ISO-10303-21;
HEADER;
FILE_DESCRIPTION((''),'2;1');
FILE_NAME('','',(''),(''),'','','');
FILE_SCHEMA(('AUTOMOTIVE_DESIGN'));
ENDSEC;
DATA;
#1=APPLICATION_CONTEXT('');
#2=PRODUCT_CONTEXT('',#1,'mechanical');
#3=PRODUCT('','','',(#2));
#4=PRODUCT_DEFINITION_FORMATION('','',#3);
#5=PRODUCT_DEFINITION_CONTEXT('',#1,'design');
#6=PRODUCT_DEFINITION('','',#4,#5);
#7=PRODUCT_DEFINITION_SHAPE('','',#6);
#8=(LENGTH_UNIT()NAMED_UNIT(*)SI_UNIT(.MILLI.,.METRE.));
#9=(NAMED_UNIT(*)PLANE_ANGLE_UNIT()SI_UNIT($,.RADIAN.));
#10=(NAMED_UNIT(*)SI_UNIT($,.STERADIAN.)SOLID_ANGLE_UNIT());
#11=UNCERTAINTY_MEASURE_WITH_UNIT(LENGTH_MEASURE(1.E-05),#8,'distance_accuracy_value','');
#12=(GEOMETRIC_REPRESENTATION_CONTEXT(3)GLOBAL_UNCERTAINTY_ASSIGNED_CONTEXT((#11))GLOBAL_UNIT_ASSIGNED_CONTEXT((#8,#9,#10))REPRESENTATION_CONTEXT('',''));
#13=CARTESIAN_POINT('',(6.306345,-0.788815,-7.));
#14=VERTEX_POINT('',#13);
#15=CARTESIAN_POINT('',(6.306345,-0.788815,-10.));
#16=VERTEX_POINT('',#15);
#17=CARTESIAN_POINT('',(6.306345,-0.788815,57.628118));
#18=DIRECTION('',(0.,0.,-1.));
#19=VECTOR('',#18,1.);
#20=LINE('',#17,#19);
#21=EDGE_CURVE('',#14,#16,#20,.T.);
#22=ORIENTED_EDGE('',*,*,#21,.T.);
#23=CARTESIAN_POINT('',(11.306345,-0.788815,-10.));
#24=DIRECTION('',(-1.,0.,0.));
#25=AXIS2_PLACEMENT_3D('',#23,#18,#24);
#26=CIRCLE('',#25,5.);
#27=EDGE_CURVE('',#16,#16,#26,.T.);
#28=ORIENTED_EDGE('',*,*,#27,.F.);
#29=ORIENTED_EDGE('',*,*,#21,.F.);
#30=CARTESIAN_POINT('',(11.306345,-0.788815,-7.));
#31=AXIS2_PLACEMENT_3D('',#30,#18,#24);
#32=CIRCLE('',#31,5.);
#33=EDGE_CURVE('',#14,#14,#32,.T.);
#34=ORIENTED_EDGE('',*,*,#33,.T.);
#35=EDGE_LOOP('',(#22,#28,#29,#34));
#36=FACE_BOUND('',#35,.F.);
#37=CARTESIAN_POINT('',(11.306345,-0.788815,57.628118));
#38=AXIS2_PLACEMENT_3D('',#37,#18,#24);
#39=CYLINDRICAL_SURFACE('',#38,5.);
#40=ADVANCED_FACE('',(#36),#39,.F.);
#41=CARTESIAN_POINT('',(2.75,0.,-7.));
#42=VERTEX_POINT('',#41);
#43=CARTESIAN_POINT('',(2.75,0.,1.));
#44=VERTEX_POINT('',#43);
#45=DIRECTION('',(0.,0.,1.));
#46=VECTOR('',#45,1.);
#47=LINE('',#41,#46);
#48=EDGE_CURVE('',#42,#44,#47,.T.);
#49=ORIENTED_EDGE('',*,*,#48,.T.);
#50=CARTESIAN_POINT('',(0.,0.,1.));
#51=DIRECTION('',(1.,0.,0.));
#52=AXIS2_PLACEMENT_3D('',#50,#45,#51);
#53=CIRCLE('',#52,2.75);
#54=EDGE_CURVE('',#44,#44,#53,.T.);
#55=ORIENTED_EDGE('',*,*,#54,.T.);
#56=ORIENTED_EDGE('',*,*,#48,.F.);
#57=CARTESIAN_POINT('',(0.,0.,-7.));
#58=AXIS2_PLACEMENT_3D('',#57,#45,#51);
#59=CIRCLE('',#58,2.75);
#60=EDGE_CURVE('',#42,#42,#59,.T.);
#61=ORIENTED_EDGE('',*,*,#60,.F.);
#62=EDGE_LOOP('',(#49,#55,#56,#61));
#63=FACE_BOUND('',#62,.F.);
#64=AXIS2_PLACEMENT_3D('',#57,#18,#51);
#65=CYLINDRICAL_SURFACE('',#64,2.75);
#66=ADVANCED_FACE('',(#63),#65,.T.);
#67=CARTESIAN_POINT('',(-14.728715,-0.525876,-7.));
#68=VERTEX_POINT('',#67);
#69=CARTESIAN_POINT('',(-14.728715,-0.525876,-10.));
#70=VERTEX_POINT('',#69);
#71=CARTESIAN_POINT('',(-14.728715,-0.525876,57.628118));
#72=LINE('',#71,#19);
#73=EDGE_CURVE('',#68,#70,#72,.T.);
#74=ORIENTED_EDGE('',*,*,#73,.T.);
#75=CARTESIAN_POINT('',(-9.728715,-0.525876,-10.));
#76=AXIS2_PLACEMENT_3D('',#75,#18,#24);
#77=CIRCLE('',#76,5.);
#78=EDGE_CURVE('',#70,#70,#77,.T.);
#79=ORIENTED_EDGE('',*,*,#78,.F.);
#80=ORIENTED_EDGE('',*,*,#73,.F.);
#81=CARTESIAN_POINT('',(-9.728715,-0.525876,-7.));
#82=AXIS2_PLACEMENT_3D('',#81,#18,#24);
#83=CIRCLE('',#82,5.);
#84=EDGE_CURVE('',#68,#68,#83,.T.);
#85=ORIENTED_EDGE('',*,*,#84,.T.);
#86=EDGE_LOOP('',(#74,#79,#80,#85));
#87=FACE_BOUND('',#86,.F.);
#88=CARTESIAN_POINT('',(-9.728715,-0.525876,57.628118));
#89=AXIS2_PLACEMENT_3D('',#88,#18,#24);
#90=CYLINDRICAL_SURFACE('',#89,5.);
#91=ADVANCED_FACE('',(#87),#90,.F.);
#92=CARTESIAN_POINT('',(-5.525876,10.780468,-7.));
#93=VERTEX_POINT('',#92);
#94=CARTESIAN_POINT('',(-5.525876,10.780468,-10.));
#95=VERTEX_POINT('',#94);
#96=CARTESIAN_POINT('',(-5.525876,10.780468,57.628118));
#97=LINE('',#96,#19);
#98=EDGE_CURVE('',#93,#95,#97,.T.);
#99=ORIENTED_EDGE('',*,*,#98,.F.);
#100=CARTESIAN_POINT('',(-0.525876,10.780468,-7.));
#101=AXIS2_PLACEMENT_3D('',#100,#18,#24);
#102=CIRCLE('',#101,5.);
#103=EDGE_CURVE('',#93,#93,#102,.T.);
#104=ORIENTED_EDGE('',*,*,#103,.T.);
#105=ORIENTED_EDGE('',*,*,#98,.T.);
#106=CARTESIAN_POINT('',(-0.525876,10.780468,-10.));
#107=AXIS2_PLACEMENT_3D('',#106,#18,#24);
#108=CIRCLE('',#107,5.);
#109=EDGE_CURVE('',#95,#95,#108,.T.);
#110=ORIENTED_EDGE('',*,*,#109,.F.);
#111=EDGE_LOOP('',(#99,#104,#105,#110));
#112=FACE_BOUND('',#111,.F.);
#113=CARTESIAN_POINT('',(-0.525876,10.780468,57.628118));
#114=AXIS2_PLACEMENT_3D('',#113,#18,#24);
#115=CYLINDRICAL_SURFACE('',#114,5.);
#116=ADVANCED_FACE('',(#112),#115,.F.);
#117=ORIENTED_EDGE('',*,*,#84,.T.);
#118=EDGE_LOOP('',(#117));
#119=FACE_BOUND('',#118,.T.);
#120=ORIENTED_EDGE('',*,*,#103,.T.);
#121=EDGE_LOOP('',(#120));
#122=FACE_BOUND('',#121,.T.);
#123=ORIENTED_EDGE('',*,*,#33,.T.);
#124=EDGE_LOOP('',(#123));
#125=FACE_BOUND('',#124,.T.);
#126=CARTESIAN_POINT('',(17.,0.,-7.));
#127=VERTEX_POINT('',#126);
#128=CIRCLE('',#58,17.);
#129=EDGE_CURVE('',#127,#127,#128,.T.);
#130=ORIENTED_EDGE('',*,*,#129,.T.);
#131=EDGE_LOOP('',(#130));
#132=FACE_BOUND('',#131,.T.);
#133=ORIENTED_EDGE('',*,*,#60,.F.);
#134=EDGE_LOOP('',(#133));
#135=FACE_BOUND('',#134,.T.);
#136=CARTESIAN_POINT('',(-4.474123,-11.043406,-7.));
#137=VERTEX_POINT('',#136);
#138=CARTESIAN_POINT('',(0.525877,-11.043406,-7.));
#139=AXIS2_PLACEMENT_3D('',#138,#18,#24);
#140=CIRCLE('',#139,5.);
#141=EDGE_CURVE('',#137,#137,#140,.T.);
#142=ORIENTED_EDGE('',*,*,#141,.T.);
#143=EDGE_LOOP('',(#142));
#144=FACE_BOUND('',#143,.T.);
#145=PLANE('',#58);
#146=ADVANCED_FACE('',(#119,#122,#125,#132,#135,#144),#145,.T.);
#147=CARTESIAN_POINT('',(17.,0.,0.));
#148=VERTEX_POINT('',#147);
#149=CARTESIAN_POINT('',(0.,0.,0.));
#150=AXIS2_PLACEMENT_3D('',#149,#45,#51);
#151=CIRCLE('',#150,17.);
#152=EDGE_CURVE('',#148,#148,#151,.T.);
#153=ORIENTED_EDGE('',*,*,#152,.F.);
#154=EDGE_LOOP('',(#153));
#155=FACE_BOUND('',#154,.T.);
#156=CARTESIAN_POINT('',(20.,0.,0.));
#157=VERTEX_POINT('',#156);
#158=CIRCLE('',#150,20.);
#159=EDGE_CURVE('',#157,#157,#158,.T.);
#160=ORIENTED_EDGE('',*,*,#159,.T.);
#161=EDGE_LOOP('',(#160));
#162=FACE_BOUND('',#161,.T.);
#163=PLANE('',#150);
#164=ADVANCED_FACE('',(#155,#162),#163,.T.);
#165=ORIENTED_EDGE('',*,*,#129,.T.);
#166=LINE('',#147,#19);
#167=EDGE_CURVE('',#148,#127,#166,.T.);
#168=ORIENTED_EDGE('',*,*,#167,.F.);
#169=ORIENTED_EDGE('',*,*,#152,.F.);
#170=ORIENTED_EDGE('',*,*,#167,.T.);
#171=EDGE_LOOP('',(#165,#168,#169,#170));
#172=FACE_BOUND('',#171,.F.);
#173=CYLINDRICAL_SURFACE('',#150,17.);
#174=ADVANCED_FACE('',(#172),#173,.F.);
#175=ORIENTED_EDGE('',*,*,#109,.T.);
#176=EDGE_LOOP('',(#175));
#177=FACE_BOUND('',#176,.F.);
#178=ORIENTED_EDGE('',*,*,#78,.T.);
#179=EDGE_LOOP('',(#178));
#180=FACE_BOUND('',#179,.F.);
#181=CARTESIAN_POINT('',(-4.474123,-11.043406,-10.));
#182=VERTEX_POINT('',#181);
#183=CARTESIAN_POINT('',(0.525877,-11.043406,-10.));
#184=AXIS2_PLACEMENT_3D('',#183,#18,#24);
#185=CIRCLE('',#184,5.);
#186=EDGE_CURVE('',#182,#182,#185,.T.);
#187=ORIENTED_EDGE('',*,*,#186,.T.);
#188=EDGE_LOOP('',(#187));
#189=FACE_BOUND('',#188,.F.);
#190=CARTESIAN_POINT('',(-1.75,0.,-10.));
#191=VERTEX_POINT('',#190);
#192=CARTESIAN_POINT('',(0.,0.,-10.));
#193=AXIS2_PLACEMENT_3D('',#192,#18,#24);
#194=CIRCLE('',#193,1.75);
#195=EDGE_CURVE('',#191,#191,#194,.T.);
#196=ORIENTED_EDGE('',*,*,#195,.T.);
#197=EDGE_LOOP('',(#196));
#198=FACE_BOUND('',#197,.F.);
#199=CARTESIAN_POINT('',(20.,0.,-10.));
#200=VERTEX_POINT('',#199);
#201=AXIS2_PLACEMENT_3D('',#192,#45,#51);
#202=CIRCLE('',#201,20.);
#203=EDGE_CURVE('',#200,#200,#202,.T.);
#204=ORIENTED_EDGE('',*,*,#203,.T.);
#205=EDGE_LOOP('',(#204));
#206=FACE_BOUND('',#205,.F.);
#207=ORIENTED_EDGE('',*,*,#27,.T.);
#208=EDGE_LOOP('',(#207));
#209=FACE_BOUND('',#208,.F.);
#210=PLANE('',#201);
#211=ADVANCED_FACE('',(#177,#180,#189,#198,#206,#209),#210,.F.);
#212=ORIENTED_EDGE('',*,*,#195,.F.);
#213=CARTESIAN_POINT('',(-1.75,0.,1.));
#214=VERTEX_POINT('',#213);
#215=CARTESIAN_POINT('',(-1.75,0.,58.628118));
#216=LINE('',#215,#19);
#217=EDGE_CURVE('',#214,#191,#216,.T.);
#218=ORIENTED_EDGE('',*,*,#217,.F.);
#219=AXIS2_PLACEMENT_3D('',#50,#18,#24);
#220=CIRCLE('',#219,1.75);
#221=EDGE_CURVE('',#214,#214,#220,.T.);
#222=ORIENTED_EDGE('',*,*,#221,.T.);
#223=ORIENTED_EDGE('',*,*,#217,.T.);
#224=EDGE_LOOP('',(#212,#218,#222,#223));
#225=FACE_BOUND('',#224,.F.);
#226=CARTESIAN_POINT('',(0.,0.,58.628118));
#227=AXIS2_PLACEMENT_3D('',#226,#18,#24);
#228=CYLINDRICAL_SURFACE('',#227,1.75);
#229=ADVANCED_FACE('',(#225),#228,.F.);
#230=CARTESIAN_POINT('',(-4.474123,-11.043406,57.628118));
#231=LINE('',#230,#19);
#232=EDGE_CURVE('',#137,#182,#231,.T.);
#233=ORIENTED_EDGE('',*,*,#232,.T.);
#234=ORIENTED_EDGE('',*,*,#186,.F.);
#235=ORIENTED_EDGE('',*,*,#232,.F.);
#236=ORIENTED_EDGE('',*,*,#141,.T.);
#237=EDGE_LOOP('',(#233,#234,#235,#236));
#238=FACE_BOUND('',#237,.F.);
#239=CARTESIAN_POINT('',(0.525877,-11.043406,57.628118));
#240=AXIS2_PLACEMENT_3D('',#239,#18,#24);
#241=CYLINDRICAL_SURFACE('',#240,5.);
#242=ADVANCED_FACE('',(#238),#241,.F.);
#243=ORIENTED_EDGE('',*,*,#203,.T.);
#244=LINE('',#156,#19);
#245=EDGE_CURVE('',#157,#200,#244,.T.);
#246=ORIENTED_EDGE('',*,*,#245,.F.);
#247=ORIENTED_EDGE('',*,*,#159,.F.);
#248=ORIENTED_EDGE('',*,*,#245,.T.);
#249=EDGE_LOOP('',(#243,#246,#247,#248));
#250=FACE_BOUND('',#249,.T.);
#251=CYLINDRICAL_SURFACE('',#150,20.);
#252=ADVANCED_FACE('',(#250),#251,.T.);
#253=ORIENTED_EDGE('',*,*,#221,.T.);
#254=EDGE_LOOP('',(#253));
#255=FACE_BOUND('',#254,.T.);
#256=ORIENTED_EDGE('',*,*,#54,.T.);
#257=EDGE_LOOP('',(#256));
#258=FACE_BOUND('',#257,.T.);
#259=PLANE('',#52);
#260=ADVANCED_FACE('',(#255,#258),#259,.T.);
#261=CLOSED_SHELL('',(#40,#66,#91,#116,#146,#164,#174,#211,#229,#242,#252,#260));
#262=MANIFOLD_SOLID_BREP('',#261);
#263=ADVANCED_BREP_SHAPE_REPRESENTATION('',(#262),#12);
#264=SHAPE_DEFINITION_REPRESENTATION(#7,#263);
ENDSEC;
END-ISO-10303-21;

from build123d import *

# Parameters (mm, degrees)
F0_R     = 20
F1_DEPTH = 10
F2_T     = -3
F6_R     = 2.75
F7_DEPTH = 8
F9_D     = 3.5
F11_D    = 10
F13_D    = 10
F15_D    = 10
F17_D    = 10


# Not quite as in the source:
# - the program builds the solid bodies; features that only make, move or delete a surface that nothing else refers to are left out


with BuildPart() as f1:
    # F0 (on Top) → F1 (new body)
    with BuildSketch(Plane.XY):
        Circle(F0_R)
    extrude(amount=-F1_DEPTH)

    # F2
    f2_openings = [f1.faces().sort_by_distance(p)[0] for p in [
        (0, 0, 0),
    ]]
    offset(amount=F2_T, openings=f2_openings)

    # F6 (on face) → F7 (join)
    with BuildSketch(Plane.XY.offset(-7)):
        Circle(F6_R)
    extrude(amount=F7_DEPTH)

    # F9 (through all)
    with Locations(Plane.XY.offset(1)):
        with Locations((0, 0)):
            Hole(F9_D / 2)

    # F11 (through all)
    with Locations(Plane.XY):
        with Locations((-0.525876123, 10.7804676518)):
            Hole(F11_D / 2)

    # F13 (through all)
    with Locations(Plane.XY):
        with Locations((-9.7287148237, -0.5258764722)):
            Hole(F13_D / 2)

    # F15 (through all)
    with Locations(Plane.XY):
        with Locations((0.5258767051, -11.0434060916)):
            Hole(F15_D / 2)

    # F17 (through all)
    with Locations(Plane.XY):
        with Locations((11.3063445315, -0.7888147375)):
            Hole(F17_D / 2)


solid = f1.part
